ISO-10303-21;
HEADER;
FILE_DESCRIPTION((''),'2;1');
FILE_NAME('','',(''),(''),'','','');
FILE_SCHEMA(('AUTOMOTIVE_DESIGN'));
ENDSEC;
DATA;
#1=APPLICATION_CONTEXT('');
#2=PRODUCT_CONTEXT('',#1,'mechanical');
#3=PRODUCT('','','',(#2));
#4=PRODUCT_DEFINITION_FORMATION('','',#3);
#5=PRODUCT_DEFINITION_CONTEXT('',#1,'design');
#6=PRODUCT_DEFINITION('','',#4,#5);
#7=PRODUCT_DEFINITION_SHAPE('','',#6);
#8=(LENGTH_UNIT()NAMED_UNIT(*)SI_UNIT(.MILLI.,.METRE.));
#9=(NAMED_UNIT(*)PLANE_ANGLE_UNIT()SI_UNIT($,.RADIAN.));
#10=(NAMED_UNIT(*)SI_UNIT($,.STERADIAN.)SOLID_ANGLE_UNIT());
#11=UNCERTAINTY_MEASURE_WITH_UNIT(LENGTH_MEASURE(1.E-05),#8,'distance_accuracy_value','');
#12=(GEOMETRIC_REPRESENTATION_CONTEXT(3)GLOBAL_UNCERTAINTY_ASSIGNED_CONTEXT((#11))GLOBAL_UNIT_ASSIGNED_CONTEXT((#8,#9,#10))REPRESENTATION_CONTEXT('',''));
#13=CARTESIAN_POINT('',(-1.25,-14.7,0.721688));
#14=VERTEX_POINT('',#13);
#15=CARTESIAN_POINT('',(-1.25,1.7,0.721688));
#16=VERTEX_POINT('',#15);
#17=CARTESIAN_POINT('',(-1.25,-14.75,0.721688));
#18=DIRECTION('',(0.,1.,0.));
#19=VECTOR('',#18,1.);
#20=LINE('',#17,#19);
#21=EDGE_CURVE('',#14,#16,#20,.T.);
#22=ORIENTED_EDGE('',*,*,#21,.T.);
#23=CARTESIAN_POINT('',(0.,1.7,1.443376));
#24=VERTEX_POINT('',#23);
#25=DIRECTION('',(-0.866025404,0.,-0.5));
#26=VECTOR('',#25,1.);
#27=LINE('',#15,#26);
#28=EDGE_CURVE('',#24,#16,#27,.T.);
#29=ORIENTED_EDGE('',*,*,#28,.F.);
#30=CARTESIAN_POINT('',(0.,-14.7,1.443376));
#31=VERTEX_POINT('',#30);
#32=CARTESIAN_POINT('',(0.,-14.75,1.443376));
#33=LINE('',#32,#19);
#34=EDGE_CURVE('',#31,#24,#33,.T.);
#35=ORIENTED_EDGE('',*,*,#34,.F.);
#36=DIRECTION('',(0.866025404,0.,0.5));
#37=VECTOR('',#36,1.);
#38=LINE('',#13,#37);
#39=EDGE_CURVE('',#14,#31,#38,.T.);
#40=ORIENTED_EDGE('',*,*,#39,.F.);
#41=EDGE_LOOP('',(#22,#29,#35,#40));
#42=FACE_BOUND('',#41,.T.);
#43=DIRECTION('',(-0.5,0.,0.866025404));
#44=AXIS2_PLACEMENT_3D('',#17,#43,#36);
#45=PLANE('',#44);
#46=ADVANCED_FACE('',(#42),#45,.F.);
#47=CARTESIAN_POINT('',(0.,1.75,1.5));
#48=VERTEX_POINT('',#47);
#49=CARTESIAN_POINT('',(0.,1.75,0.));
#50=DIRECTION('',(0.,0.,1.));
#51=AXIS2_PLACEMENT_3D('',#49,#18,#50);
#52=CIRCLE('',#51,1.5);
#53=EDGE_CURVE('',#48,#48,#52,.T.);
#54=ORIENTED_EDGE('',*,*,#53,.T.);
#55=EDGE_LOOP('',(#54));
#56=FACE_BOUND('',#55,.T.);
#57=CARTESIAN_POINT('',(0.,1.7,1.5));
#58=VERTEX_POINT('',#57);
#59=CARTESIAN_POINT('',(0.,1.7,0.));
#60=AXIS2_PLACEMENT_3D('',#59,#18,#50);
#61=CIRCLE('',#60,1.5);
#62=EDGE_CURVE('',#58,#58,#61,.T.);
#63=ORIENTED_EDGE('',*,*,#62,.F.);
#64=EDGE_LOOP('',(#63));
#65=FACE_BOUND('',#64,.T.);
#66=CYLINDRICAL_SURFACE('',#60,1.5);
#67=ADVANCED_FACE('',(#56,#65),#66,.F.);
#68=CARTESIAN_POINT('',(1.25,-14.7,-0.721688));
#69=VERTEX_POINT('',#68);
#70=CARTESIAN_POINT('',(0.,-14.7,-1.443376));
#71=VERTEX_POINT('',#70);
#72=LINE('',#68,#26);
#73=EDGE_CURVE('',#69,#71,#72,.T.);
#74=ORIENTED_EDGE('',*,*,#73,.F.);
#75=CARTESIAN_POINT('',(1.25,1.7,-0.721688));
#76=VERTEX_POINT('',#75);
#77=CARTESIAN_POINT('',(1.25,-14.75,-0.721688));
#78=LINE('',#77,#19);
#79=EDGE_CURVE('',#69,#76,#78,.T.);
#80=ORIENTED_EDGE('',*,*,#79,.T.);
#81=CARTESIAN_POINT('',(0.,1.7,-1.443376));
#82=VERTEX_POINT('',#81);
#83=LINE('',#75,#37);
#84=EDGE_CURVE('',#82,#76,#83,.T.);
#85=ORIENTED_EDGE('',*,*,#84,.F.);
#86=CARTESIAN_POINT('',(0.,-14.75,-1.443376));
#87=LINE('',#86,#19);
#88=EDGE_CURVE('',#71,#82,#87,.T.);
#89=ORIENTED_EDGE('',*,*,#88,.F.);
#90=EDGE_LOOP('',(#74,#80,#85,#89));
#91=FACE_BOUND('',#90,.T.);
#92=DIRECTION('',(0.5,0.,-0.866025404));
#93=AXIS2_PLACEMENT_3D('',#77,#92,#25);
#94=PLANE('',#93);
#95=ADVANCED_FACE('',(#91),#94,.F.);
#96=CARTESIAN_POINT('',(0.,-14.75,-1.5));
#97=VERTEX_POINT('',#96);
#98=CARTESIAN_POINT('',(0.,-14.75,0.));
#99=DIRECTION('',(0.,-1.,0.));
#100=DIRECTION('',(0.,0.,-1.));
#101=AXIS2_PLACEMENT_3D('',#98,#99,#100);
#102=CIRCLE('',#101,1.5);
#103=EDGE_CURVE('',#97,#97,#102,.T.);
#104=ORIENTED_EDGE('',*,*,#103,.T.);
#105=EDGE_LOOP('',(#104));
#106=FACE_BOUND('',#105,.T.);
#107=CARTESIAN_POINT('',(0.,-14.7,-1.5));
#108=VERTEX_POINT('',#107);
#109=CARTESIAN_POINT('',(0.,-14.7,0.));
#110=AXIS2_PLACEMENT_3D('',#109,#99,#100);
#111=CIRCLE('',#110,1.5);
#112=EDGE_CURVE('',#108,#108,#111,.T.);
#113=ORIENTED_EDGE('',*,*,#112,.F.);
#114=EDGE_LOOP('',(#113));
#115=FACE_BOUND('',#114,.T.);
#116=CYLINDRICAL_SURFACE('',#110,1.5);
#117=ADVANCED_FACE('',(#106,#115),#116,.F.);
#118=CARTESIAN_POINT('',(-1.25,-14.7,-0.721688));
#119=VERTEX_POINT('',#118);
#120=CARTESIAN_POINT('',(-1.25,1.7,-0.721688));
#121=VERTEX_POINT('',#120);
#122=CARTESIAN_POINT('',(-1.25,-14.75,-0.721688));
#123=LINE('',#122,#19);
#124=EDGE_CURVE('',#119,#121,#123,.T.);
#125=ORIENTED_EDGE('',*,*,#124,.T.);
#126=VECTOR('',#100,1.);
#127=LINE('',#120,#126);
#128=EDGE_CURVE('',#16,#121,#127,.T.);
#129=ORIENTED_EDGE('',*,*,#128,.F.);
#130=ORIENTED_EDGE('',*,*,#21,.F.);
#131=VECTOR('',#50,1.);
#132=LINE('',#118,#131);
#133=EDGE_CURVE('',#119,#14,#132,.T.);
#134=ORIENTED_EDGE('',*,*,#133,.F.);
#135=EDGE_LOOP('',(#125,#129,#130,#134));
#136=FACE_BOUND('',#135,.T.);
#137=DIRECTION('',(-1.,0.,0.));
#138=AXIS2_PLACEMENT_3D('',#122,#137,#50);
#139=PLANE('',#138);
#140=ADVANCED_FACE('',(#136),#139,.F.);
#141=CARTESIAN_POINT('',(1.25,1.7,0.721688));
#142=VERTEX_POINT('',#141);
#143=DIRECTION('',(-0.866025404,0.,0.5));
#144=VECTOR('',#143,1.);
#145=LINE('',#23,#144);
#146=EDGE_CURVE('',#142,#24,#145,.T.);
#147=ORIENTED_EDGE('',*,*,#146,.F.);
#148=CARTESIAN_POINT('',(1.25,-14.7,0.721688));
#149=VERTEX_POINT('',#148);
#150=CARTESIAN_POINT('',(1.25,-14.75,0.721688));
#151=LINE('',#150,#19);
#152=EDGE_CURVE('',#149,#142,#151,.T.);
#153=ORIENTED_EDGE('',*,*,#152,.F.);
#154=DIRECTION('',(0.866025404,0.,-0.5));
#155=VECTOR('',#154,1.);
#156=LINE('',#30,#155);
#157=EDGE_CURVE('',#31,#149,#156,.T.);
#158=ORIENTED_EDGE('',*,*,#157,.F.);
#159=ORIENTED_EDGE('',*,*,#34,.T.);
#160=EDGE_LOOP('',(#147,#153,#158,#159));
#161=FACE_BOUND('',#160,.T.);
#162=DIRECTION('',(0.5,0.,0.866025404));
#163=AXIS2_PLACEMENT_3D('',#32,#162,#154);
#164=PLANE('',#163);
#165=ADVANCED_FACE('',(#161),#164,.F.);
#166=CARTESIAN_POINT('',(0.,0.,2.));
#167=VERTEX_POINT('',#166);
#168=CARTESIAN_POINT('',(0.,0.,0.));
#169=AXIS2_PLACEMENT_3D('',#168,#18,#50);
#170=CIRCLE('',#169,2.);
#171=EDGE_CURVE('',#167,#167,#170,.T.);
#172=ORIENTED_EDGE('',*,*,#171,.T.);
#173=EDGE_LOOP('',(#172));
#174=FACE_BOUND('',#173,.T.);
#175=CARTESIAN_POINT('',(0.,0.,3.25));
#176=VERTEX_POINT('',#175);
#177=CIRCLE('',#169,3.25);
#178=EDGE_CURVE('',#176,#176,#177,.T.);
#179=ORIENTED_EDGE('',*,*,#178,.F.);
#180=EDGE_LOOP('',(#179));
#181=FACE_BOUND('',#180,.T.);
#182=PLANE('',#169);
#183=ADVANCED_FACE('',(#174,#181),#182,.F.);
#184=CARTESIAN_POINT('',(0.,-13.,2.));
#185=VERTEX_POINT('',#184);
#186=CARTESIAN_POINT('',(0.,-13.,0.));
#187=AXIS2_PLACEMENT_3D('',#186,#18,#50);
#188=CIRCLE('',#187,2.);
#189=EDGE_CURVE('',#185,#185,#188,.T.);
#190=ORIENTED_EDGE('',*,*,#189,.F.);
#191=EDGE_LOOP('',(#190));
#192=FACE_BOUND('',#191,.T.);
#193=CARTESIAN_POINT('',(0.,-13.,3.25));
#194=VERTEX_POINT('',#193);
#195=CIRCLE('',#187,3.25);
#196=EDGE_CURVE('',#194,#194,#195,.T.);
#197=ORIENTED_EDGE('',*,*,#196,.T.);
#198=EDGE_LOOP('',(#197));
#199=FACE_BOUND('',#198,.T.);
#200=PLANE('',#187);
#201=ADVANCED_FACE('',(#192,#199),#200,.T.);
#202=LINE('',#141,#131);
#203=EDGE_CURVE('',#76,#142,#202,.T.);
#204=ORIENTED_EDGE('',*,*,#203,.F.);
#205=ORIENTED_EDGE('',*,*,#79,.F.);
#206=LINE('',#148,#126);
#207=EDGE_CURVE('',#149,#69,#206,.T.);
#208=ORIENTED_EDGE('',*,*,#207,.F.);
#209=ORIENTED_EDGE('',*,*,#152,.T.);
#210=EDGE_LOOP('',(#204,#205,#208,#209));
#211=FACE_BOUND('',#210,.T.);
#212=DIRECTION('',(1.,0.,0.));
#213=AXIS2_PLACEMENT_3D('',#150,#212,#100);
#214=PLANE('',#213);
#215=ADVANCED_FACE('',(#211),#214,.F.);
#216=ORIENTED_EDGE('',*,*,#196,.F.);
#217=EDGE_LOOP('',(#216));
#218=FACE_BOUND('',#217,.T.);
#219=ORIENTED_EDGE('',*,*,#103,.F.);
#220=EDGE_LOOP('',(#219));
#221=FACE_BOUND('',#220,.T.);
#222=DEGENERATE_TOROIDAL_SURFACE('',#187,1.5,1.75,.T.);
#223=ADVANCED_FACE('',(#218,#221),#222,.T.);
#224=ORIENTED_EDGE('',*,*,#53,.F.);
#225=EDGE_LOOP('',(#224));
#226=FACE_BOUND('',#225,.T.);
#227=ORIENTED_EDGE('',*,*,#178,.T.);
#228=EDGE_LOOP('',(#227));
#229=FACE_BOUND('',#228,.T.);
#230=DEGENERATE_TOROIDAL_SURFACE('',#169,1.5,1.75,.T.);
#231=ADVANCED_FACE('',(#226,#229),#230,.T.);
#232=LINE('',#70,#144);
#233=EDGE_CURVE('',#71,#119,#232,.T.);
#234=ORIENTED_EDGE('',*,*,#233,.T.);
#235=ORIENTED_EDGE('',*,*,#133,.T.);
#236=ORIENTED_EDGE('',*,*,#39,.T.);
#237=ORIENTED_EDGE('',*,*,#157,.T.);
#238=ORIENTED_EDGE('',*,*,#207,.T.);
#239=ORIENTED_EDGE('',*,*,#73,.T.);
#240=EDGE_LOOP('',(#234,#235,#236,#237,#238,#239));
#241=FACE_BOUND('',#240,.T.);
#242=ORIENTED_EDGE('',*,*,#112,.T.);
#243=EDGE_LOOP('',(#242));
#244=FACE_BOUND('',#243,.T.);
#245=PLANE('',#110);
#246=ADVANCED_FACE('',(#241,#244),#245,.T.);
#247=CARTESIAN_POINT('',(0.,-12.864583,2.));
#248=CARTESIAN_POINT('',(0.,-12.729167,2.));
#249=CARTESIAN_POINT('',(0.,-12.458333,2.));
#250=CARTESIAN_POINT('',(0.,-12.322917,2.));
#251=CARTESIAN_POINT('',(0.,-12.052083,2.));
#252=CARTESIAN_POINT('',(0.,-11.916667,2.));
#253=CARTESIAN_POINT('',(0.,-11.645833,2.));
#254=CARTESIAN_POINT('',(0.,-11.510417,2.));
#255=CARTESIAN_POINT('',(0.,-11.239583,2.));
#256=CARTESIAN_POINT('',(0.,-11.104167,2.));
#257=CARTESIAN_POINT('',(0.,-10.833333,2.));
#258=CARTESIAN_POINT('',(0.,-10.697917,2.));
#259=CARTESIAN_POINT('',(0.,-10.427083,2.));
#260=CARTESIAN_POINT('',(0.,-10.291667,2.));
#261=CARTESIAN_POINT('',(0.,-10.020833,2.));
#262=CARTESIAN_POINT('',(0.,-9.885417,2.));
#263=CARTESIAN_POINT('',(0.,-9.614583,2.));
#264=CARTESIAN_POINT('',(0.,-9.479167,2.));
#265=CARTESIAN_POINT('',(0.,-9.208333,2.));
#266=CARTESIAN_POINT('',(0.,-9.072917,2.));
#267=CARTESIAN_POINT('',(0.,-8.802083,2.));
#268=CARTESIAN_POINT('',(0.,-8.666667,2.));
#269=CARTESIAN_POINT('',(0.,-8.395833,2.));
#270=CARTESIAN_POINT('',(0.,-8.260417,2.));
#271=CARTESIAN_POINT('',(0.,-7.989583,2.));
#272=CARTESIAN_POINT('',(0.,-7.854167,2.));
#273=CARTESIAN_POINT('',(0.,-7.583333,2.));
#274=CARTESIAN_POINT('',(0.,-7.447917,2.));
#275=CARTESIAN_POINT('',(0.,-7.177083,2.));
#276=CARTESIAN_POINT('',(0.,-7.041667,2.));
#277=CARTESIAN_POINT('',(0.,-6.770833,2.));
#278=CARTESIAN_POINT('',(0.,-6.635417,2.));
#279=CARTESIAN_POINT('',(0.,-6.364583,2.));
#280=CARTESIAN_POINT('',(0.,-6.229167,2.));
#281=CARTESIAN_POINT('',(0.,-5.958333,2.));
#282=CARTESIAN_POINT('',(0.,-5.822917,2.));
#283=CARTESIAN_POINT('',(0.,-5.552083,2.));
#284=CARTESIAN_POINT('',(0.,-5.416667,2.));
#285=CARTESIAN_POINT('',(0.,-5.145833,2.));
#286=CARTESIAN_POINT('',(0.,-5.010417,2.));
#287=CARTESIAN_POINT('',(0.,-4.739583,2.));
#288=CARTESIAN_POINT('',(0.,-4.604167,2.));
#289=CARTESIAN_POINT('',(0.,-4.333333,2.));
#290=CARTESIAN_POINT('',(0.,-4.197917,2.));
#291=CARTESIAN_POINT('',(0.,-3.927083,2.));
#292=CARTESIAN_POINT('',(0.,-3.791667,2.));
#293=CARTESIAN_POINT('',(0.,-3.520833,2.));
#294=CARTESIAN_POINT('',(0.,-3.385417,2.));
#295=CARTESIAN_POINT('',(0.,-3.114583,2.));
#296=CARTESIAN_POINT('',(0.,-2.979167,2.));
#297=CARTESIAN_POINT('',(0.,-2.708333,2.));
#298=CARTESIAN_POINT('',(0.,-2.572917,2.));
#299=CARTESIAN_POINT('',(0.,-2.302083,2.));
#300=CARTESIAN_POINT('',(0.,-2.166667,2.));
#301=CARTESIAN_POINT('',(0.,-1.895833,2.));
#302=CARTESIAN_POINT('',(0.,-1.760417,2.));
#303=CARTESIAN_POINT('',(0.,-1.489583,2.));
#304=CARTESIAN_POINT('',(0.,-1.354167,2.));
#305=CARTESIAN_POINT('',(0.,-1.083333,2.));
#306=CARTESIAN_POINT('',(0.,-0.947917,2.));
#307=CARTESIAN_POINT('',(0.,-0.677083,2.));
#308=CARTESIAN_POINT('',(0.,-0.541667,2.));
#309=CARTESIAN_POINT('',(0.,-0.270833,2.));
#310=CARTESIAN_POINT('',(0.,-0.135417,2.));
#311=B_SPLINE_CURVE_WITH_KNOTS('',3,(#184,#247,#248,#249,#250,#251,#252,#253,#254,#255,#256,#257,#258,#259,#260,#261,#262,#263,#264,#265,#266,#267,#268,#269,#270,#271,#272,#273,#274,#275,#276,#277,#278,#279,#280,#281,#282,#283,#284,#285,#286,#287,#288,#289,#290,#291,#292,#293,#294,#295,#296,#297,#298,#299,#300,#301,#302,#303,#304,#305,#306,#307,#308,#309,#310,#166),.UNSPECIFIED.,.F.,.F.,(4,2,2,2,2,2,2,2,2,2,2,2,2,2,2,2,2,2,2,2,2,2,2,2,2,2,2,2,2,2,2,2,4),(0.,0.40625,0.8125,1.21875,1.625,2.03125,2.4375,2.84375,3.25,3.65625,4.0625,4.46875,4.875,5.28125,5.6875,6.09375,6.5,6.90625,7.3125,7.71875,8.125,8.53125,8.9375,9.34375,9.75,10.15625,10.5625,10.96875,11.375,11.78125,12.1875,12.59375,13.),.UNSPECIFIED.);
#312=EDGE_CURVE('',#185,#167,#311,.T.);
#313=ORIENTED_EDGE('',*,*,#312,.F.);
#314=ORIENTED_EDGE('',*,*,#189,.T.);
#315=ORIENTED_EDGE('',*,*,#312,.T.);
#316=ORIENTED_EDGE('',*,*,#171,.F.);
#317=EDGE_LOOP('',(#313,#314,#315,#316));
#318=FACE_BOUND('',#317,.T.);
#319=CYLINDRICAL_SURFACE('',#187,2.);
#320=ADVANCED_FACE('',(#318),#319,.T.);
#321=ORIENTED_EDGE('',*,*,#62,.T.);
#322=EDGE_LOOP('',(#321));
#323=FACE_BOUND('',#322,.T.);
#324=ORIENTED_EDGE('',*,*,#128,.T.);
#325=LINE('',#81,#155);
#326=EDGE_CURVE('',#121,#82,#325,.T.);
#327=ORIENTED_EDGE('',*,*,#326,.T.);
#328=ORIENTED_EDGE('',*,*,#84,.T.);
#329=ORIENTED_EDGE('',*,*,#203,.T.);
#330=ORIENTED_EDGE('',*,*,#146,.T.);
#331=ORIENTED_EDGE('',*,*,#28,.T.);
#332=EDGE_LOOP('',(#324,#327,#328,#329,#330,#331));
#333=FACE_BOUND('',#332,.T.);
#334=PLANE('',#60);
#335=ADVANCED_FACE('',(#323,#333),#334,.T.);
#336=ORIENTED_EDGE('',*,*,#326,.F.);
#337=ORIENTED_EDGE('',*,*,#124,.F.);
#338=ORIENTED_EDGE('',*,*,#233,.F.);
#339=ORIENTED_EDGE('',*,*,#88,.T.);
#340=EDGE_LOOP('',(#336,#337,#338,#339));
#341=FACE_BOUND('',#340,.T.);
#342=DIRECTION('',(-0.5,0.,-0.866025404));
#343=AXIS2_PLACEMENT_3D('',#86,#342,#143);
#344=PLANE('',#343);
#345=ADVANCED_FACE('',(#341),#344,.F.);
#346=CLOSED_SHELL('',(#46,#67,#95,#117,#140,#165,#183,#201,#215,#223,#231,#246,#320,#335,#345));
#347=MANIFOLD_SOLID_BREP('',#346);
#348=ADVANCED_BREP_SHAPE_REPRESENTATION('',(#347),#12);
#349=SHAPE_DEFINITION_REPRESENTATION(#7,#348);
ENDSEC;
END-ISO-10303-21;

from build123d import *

# Parameters (mm, degrees)
BOSS_EXTRUDE1_DEPTH      = 1.75
BOSS_EXTRUDE1_DEPTH_BACK = 14.75
SKETCH1_R                = 3.25
FILLET1_R                = 1.75
SKETCH7_R                = 1.5
CUT_EXTRUDE2_DEPTH       = 0.05
SKETCH1_4_R              = 3.25
SKETCH1_4_R_2            = 2
CUT_EXTRUDE3_DEPTH       = 13
FILLET2_R                = 1.75
CUT_EXTRUDE4_START       = -0.05
SKETCH8_R                = 1.5
CUT_EXTRUDE4_DEPTH       = 0.05


with BuildPart() as part:
    # Sketch1 → Boss-Extrude1 (new, two sides: drawn at the far end of the back side and taken through both)
    with BuildSketch(Plane(origin=(0, 0, 0), x_dir=(1, 0, 0), z_dir=(0, 1, 0)).offset(-BOSS_EXTRUDE1_DEPTH_BACK)):
        with Locations(Location((0, 0, 0), (0, 0, 270))):
            Circle(SKETCH1_R)
        Polygon((0, 1.443375673), (-1.25, 0.721687836), (-1.25, -0.721687836), (0, -1.443375673), (1.25, -0.721687836), (1.25, 0.721687836), align=None, mode=Mode.SUBTRACT)
    extrude(amount=BOSS_EXTRUDE1_DEPTH + BOSS_EXTRUDE1_DEPTH_BACK)

    # Fillet1
    fillet1_edges = [part.edges().sort_by_distance(p)[0] for p in [
        (0, 1.75, -3.25),
    ]]
    fillet(fillet1_edges, radius=FILLET1_R - 0.0001)  # a hair under: the kernel refuses the full size

    # Sketch7 → Cut-Extrude2 (cut)
    with BuildSketch(Plane(origin=(0, 1.75, 0), x_dir=(1, 0, 0), z_dir=(0, 1, 0))):
        with Locations(Location((0, 0, 0), (0, 0, 270))):
            Circle(SKETCH7_R)
    extrude(amount=-CUT_EXTRUDE2_DEPTH, mode=Mode.SUBTRACT)

    # Sketch1<4> → Cut-Extrude3 (cut)
    with BuildSketch(Plane(origin=(0, 0, 0), x_dir=(1, 0, 0), z_dir=(0, 1, 0))):
        with Locations(Location((0, 0, 0), (0, 0, 270))):
            Circle(SKETCH1_4_R)
        with Locations(Location((0, 0, 0), (0, 0, 270))):
            Circle(SKETCH1_4_R_2, mode=Mode.SUBTRACT)
    extrude(amount=-CUT_EXTRUDE3_DEPTH, mode=Mode.SUBTRACT)

    # Fillet2
    fillet2_edges = [part.edges().sort_by_distance(p)[0] for p in [
        (0, -14.75, -3.25),
    ]]
    fillet(fillet2_edges, radius=FILLET2_R - 0.0001)  # a hair under: the kernel refuses the full size

    # Sketch8 → Cut-Extrude4 (cut)
    with BuildSketch(Plane.XZ.offset(14.75).offset(CUT_EXTRUDE4_START)):
        with Locations(Location((0, 0, 0), (0, 0, 90))):
            Circle(SKETCH8_R)
    extrude(amount=CUT_EXTRUDE4_DEPTH, mode=Mode.SUBTRACT)


solid = part.part
